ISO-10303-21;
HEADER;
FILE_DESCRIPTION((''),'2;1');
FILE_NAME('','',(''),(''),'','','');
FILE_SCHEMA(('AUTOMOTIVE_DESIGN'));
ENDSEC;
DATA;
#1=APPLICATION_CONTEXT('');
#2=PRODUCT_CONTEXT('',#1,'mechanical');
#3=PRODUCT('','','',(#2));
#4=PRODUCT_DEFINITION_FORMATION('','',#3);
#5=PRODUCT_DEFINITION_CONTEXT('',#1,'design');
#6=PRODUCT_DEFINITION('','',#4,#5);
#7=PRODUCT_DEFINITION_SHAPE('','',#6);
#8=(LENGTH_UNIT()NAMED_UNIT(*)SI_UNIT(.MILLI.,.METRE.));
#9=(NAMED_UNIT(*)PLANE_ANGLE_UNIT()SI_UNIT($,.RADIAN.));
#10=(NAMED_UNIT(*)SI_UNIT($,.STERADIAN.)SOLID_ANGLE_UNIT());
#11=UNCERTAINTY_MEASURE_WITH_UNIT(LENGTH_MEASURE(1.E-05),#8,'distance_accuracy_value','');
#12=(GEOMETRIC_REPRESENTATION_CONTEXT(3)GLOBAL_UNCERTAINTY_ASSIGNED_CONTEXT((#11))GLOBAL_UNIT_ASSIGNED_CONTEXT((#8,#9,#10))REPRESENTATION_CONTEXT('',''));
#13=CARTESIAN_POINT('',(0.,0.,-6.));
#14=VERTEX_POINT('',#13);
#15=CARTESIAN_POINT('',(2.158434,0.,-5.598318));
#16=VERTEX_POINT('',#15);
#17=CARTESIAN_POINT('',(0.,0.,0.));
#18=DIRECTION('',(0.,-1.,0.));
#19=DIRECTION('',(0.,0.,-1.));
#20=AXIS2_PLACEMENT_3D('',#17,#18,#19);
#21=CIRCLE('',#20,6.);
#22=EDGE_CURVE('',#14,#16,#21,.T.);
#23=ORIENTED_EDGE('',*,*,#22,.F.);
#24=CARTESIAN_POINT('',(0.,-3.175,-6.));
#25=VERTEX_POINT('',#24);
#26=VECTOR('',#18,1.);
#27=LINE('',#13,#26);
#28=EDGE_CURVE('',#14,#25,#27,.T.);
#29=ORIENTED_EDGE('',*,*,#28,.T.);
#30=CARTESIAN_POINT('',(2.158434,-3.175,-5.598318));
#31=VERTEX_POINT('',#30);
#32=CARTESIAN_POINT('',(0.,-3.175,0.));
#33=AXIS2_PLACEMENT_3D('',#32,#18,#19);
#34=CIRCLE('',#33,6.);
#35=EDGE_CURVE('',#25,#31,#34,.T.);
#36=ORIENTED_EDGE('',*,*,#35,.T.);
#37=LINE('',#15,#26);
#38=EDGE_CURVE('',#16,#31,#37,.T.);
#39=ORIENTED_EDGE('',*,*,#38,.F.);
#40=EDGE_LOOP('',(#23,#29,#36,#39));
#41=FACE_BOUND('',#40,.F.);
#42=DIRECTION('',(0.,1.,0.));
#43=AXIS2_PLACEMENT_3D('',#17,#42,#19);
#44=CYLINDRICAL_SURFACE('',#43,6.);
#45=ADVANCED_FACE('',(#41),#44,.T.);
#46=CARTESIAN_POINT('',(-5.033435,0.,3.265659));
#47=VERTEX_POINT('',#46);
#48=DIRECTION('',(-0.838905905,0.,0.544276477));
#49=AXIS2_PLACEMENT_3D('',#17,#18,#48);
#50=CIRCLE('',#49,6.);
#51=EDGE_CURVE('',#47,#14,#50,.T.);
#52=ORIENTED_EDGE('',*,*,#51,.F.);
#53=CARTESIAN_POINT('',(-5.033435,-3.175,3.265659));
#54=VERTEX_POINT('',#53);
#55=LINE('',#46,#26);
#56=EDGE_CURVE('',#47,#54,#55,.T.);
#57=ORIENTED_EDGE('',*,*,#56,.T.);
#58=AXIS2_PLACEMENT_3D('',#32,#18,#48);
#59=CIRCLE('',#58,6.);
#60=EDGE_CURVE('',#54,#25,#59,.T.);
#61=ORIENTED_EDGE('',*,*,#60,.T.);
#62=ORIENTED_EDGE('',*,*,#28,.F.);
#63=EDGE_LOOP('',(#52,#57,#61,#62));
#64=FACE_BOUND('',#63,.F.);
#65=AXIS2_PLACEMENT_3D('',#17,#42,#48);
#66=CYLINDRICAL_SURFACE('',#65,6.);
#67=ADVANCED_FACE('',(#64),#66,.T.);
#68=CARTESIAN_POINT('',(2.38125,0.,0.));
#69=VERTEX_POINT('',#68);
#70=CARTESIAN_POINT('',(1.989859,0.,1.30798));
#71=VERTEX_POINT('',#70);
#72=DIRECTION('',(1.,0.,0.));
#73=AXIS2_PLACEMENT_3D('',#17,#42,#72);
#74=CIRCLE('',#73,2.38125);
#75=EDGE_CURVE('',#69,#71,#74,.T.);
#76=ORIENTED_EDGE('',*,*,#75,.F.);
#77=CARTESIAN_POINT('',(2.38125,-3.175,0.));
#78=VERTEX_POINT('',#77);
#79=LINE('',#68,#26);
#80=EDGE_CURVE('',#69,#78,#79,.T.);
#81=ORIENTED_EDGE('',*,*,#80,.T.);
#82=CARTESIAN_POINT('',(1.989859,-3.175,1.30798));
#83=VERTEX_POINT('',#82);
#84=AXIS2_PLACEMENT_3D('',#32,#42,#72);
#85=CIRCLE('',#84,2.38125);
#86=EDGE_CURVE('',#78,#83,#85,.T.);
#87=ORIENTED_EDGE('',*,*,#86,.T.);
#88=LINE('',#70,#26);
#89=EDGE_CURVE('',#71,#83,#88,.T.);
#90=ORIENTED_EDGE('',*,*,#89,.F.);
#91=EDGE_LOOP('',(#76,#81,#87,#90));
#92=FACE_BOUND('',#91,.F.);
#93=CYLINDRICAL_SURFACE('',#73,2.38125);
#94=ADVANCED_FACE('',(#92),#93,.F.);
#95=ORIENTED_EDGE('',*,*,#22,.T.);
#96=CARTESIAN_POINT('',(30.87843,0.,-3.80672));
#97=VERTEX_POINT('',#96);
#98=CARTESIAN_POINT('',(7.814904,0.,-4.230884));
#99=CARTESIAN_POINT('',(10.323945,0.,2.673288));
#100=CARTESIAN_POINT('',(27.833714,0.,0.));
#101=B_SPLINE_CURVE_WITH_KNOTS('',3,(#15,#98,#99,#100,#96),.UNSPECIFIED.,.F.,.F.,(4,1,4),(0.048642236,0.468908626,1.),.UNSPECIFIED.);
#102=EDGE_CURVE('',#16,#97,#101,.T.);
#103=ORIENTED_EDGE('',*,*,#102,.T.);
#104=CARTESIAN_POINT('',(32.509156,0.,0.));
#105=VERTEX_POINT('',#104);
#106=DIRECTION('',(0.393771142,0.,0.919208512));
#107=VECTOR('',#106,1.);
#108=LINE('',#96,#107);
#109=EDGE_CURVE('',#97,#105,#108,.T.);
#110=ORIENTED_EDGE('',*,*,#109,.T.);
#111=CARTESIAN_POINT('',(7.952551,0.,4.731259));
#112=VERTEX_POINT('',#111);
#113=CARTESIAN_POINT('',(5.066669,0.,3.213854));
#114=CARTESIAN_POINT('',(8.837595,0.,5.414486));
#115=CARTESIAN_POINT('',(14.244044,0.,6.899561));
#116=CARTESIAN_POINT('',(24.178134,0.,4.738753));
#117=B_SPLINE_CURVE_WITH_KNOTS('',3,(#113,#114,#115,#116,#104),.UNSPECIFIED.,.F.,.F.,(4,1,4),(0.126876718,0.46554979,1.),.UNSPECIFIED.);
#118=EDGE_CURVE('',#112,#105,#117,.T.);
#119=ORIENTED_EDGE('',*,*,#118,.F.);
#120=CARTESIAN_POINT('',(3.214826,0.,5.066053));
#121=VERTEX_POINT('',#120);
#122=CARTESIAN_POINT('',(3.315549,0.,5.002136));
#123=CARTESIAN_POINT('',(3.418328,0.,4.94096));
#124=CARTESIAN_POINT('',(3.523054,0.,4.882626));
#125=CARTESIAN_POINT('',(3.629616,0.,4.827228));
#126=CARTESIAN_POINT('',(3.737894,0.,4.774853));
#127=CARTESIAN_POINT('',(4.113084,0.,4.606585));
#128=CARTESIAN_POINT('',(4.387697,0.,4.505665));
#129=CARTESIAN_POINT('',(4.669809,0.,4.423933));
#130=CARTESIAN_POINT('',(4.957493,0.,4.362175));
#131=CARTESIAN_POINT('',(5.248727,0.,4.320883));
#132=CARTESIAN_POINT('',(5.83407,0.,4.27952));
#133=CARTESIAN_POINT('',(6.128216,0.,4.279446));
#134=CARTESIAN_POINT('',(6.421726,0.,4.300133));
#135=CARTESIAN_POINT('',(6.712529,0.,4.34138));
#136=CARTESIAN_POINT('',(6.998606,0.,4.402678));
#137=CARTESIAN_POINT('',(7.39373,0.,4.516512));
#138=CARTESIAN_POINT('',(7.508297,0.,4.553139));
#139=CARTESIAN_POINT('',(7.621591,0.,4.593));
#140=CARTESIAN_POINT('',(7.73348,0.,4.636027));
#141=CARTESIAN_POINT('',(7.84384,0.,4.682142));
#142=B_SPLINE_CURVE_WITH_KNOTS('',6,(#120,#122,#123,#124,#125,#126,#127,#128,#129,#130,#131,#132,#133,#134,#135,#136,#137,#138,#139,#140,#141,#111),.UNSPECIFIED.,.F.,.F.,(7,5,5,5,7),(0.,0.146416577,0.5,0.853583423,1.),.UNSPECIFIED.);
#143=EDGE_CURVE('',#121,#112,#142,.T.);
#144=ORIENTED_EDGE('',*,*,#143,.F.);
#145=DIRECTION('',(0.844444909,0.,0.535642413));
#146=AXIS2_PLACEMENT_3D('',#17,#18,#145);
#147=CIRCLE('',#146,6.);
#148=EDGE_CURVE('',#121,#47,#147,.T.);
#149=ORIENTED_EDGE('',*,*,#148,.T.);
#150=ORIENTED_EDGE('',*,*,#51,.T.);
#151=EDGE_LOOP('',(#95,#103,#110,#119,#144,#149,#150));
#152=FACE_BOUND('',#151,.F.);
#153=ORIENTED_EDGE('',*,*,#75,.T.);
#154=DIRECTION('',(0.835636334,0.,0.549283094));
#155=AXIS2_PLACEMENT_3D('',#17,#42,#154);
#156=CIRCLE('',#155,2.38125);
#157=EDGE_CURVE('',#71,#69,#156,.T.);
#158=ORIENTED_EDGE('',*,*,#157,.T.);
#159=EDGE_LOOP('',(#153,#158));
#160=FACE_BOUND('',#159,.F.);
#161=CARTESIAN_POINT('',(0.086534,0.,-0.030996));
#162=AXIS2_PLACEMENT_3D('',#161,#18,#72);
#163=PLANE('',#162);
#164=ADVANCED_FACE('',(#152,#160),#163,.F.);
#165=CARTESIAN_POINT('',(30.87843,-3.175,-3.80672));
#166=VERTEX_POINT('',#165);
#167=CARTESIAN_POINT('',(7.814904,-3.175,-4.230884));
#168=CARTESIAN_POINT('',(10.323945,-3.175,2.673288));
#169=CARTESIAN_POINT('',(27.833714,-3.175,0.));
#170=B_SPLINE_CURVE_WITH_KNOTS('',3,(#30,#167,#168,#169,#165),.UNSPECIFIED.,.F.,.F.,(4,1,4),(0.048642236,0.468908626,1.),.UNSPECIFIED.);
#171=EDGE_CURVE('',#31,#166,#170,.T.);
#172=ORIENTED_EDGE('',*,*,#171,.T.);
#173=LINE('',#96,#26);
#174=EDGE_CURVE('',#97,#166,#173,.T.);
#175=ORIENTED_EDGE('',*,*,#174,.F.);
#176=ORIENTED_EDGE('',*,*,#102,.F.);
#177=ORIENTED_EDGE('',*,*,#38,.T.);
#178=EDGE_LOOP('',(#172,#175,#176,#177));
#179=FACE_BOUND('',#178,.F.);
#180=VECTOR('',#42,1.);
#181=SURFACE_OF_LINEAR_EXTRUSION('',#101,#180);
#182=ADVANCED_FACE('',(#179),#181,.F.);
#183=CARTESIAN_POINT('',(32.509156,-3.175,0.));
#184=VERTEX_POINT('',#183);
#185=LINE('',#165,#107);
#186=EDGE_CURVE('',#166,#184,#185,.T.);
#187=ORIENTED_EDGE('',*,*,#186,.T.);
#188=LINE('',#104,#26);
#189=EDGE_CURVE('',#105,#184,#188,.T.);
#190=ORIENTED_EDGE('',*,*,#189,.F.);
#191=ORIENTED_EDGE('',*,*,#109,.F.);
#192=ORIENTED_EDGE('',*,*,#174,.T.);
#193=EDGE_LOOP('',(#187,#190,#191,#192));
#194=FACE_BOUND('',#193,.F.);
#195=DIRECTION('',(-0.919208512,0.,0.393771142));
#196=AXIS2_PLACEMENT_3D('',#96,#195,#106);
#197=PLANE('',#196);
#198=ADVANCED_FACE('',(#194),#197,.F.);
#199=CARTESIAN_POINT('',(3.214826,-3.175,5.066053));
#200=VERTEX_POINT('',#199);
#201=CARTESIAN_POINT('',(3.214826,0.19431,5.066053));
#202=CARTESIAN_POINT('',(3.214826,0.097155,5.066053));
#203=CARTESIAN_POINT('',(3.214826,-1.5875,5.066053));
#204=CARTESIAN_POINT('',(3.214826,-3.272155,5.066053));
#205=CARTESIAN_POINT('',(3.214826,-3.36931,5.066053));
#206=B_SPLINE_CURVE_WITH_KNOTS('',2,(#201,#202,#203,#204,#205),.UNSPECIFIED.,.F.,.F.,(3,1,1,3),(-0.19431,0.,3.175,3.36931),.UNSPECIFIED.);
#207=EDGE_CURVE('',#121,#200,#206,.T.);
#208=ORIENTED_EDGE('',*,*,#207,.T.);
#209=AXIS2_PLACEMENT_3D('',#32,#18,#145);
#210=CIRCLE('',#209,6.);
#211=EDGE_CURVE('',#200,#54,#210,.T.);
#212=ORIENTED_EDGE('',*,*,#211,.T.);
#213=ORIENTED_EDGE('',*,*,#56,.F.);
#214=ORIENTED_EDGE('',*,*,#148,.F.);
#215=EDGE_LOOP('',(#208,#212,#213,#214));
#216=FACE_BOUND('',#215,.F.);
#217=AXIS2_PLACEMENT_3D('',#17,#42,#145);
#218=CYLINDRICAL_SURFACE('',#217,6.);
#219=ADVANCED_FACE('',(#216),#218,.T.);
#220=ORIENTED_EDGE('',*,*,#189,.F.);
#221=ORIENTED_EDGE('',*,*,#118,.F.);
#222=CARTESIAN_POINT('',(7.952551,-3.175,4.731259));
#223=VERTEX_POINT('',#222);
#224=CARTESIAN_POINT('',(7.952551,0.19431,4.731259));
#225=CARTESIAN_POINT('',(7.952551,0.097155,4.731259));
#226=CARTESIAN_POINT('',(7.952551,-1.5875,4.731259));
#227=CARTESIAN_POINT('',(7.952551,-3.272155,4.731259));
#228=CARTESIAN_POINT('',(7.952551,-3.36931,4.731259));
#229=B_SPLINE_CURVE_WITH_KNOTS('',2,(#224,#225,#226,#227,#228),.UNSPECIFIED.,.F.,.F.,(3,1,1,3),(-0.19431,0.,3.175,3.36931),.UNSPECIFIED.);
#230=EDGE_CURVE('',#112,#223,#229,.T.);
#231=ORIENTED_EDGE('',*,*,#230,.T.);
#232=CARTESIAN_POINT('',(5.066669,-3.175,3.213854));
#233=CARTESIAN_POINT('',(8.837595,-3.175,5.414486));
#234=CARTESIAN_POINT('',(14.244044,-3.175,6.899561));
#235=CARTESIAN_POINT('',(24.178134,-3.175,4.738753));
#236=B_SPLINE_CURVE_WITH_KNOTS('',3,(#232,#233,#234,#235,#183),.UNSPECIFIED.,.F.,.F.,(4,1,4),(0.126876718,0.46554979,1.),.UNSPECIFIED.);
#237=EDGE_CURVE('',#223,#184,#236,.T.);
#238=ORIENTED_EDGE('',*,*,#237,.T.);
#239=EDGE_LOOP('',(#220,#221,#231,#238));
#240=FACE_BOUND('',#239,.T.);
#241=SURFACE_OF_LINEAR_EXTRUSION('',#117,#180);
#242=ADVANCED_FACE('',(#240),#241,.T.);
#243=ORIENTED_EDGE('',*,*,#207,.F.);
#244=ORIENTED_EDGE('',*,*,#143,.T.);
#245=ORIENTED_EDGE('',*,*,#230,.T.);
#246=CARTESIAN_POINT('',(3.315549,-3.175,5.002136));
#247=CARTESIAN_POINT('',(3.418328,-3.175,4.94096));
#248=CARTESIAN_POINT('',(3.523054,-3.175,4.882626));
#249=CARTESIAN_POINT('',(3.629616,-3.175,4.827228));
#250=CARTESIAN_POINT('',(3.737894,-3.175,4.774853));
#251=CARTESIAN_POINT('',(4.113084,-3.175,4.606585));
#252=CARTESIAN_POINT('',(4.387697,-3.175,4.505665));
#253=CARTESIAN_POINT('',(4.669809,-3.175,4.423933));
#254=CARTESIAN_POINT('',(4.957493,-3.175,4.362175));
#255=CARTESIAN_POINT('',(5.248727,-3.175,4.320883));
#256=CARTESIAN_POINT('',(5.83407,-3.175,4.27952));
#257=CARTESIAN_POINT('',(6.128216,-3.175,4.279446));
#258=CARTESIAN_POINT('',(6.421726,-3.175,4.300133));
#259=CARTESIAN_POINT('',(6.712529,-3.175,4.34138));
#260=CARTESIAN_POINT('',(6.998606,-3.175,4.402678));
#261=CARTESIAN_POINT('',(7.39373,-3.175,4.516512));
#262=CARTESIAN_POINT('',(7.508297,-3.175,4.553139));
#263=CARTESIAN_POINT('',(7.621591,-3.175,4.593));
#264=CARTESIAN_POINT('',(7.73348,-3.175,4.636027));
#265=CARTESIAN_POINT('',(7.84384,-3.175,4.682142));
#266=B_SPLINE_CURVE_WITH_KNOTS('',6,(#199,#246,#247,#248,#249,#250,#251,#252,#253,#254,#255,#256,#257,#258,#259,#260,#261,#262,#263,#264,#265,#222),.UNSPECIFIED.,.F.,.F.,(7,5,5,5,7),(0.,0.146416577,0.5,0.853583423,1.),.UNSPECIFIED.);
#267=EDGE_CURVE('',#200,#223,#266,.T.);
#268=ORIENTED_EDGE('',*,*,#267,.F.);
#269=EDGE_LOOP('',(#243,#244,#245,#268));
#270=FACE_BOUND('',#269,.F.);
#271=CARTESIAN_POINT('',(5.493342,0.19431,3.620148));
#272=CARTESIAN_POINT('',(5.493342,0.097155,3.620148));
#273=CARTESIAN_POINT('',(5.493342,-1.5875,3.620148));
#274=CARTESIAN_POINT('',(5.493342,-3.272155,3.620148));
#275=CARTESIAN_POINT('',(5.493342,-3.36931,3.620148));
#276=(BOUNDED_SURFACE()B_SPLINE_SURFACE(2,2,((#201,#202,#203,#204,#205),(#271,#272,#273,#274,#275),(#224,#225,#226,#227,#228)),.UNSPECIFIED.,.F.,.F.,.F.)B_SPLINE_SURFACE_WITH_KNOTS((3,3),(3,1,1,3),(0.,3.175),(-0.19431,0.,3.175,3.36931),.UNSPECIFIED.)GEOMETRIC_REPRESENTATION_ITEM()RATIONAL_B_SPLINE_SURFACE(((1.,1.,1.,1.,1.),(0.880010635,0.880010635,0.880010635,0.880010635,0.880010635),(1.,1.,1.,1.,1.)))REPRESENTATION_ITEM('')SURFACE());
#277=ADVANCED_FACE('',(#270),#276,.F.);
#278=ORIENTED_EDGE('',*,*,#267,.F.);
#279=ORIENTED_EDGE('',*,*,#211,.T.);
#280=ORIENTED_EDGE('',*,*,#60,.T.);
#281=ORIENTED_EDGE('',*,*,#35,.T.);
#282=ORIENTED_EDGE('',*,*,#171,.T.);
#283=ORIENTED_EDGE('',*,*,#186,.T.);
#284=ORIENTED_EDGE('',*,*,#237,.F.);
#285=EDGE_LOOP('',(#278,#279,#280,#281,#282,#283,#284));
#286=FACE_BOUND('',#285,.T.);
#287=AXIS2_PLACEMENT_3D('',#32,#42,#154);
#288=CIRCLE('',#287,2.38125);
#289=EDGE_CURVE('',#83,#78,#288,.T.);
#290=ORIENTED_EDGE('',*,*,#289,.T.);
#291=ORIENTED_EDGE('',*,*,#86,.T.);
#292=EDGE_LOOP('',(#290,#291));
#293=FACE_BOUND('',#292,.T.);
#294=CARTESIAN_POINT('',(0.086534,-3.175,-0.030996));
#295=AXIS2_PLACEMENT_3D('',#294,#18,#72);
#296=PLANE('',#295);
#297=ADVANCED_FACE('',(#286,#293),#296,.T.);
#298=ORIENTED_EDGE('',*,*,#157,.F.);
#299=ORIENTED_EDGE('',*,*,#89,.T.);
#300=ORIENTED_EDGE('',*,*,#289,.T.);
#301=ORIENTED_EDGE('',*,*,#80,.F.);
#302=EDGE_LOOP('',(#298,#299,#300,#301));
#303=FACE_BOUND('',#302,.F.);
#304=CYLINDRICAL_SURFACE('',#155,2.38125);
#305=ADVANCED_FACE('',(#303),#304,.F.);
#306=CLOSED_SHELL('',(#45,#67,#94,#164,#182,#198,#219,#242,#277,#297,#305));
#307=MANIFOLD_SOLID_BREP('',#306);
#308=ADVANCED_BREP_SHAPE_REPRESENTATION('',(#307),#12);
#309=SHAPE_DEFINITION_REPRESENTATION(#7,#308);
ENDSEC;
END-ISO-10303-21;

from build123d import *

# Parameters (mm, degrees)
F1_DEPTH = 3.175
F2_R     = 5


# Not quite as in the source:
# - a length typed as a fraction of an inch, garbled in the dataset ("3 / 203.2 mm" for 3/8 in), is restored


with BuildPart() as f1:
    # F0 (on Front) → F1 (new body)
    with BuildSketch(Plane.XZ):
        with BuildLine():
            ThreePointArc((6, 0), (5.7619448426, 1.6733175524), (5.0666694563, 3.2138544803))
            ThreePointArc((5.0666694563, 3.2138544803), (0.0307741544, 5.9999210788), (-5.0334354285, 3.2656588595))
            ThreePointArc((-5.0334354285, 3.2656588595), (-5.2722838105, -2.8640920763), (0, -6))
            add(Edge.make_bspline(
                [(0, -6), (0.7881316779, -5.8923160671), (1.5037462454, -5.7565864603), (2.1584342276, -5.5983177549)],
                knots=[0, 0, 0, 0, 0.0486422356, 0.0486422356, 0.0486422356, 0.0486422356], degree=3))
            ThreePointArc((2.1584342276, -5.5983177549), (3.7803533787, -4.6592841008), (5.0334354285, -3.2656588595))
            ThreePointArc((5.0334354285, -3.2656588595), (5.7532865638, -1.7028487057), (6, 0))
        make_face()
        with BuildLine():
            ThreePointArc((1.9898590203, 1.3079803675), (2.281304819, 0.6826418425), (2.38125, 0))
            ThreePointArc((2.38125, 0), (-2.281304819, -0.6826418425), (1.9898590203, 1.3079803675))
        make_face(mode=Mode.SUBTRACT)
        with BuildLine():
            add(Edge.make_bspline(
                [(5.0666694563, 3.2138544803), (8.837595406, 5.414485816), (14.2440437805, 6.8995614863), (24.1781340673, 4.7387528577), (32.5091555715, 0)],
                knots=[0.1268767178, 0.1268767178, 0.1268767178, 0.1268767178, 0.46554979, 1, 1, 1, 1], degree=3))
            ThreePointArc((5.0666694563, 3.2138544803), (5.7619448426, 1.6733175524), (6, 0))
            ThreePointArc((6, 0), (5.7532865638, -1.7028487057), (5.0334354285, -3.2656588595))
            ThreePointArc((5.0334354285, -3.2656588595), (3.7803533787, -4.6592841008), (2.1584342276, -5.5983177549))
            add(Edge.make_bspline(
                [(2.1584342276, -5.5983177549), (7.8149044031, -4.2308843573), (10.3239452596, 2.6732879939), (27.8337137958, 0), (30.8784303042, -3.806720163)],
                knots=[0.0486422356, 0.0486422356, 0.0486422356, 0.0486422356, 0.4689086255, 1, 1, 1, 1], degree=3))
            Line((30.8784303042, -3.806720163), (32.5091555715, 0))
        make_face()
        with BuildLine():
            add(Edge.make_bspline(
                [(0, -6), (0.7881316779, -5.8923160671), (1.5037462454, -5.7565864603), (2.1584342276, -5.5983177549)],
                knots=[0, 0, 0, 0, 0.0486422356, 0.0486422356, 0.0486422356, 0.0486422356], degree=3))
            ThreePointArc((0, -6), (1.0977462071, -5.8987247151), (2.1584342276, -5.5983177549))
        make_face()
    extrude(amount=F1_DEPTH)

    # F2
    f2_edges = [f1.edges().sort_by_distance(p)[0] for p in [
        (5.066669, -1.5875, 3.213854),
    ]]
    fillet(f2_edges, radius=F2_R)


solid = f1.part
